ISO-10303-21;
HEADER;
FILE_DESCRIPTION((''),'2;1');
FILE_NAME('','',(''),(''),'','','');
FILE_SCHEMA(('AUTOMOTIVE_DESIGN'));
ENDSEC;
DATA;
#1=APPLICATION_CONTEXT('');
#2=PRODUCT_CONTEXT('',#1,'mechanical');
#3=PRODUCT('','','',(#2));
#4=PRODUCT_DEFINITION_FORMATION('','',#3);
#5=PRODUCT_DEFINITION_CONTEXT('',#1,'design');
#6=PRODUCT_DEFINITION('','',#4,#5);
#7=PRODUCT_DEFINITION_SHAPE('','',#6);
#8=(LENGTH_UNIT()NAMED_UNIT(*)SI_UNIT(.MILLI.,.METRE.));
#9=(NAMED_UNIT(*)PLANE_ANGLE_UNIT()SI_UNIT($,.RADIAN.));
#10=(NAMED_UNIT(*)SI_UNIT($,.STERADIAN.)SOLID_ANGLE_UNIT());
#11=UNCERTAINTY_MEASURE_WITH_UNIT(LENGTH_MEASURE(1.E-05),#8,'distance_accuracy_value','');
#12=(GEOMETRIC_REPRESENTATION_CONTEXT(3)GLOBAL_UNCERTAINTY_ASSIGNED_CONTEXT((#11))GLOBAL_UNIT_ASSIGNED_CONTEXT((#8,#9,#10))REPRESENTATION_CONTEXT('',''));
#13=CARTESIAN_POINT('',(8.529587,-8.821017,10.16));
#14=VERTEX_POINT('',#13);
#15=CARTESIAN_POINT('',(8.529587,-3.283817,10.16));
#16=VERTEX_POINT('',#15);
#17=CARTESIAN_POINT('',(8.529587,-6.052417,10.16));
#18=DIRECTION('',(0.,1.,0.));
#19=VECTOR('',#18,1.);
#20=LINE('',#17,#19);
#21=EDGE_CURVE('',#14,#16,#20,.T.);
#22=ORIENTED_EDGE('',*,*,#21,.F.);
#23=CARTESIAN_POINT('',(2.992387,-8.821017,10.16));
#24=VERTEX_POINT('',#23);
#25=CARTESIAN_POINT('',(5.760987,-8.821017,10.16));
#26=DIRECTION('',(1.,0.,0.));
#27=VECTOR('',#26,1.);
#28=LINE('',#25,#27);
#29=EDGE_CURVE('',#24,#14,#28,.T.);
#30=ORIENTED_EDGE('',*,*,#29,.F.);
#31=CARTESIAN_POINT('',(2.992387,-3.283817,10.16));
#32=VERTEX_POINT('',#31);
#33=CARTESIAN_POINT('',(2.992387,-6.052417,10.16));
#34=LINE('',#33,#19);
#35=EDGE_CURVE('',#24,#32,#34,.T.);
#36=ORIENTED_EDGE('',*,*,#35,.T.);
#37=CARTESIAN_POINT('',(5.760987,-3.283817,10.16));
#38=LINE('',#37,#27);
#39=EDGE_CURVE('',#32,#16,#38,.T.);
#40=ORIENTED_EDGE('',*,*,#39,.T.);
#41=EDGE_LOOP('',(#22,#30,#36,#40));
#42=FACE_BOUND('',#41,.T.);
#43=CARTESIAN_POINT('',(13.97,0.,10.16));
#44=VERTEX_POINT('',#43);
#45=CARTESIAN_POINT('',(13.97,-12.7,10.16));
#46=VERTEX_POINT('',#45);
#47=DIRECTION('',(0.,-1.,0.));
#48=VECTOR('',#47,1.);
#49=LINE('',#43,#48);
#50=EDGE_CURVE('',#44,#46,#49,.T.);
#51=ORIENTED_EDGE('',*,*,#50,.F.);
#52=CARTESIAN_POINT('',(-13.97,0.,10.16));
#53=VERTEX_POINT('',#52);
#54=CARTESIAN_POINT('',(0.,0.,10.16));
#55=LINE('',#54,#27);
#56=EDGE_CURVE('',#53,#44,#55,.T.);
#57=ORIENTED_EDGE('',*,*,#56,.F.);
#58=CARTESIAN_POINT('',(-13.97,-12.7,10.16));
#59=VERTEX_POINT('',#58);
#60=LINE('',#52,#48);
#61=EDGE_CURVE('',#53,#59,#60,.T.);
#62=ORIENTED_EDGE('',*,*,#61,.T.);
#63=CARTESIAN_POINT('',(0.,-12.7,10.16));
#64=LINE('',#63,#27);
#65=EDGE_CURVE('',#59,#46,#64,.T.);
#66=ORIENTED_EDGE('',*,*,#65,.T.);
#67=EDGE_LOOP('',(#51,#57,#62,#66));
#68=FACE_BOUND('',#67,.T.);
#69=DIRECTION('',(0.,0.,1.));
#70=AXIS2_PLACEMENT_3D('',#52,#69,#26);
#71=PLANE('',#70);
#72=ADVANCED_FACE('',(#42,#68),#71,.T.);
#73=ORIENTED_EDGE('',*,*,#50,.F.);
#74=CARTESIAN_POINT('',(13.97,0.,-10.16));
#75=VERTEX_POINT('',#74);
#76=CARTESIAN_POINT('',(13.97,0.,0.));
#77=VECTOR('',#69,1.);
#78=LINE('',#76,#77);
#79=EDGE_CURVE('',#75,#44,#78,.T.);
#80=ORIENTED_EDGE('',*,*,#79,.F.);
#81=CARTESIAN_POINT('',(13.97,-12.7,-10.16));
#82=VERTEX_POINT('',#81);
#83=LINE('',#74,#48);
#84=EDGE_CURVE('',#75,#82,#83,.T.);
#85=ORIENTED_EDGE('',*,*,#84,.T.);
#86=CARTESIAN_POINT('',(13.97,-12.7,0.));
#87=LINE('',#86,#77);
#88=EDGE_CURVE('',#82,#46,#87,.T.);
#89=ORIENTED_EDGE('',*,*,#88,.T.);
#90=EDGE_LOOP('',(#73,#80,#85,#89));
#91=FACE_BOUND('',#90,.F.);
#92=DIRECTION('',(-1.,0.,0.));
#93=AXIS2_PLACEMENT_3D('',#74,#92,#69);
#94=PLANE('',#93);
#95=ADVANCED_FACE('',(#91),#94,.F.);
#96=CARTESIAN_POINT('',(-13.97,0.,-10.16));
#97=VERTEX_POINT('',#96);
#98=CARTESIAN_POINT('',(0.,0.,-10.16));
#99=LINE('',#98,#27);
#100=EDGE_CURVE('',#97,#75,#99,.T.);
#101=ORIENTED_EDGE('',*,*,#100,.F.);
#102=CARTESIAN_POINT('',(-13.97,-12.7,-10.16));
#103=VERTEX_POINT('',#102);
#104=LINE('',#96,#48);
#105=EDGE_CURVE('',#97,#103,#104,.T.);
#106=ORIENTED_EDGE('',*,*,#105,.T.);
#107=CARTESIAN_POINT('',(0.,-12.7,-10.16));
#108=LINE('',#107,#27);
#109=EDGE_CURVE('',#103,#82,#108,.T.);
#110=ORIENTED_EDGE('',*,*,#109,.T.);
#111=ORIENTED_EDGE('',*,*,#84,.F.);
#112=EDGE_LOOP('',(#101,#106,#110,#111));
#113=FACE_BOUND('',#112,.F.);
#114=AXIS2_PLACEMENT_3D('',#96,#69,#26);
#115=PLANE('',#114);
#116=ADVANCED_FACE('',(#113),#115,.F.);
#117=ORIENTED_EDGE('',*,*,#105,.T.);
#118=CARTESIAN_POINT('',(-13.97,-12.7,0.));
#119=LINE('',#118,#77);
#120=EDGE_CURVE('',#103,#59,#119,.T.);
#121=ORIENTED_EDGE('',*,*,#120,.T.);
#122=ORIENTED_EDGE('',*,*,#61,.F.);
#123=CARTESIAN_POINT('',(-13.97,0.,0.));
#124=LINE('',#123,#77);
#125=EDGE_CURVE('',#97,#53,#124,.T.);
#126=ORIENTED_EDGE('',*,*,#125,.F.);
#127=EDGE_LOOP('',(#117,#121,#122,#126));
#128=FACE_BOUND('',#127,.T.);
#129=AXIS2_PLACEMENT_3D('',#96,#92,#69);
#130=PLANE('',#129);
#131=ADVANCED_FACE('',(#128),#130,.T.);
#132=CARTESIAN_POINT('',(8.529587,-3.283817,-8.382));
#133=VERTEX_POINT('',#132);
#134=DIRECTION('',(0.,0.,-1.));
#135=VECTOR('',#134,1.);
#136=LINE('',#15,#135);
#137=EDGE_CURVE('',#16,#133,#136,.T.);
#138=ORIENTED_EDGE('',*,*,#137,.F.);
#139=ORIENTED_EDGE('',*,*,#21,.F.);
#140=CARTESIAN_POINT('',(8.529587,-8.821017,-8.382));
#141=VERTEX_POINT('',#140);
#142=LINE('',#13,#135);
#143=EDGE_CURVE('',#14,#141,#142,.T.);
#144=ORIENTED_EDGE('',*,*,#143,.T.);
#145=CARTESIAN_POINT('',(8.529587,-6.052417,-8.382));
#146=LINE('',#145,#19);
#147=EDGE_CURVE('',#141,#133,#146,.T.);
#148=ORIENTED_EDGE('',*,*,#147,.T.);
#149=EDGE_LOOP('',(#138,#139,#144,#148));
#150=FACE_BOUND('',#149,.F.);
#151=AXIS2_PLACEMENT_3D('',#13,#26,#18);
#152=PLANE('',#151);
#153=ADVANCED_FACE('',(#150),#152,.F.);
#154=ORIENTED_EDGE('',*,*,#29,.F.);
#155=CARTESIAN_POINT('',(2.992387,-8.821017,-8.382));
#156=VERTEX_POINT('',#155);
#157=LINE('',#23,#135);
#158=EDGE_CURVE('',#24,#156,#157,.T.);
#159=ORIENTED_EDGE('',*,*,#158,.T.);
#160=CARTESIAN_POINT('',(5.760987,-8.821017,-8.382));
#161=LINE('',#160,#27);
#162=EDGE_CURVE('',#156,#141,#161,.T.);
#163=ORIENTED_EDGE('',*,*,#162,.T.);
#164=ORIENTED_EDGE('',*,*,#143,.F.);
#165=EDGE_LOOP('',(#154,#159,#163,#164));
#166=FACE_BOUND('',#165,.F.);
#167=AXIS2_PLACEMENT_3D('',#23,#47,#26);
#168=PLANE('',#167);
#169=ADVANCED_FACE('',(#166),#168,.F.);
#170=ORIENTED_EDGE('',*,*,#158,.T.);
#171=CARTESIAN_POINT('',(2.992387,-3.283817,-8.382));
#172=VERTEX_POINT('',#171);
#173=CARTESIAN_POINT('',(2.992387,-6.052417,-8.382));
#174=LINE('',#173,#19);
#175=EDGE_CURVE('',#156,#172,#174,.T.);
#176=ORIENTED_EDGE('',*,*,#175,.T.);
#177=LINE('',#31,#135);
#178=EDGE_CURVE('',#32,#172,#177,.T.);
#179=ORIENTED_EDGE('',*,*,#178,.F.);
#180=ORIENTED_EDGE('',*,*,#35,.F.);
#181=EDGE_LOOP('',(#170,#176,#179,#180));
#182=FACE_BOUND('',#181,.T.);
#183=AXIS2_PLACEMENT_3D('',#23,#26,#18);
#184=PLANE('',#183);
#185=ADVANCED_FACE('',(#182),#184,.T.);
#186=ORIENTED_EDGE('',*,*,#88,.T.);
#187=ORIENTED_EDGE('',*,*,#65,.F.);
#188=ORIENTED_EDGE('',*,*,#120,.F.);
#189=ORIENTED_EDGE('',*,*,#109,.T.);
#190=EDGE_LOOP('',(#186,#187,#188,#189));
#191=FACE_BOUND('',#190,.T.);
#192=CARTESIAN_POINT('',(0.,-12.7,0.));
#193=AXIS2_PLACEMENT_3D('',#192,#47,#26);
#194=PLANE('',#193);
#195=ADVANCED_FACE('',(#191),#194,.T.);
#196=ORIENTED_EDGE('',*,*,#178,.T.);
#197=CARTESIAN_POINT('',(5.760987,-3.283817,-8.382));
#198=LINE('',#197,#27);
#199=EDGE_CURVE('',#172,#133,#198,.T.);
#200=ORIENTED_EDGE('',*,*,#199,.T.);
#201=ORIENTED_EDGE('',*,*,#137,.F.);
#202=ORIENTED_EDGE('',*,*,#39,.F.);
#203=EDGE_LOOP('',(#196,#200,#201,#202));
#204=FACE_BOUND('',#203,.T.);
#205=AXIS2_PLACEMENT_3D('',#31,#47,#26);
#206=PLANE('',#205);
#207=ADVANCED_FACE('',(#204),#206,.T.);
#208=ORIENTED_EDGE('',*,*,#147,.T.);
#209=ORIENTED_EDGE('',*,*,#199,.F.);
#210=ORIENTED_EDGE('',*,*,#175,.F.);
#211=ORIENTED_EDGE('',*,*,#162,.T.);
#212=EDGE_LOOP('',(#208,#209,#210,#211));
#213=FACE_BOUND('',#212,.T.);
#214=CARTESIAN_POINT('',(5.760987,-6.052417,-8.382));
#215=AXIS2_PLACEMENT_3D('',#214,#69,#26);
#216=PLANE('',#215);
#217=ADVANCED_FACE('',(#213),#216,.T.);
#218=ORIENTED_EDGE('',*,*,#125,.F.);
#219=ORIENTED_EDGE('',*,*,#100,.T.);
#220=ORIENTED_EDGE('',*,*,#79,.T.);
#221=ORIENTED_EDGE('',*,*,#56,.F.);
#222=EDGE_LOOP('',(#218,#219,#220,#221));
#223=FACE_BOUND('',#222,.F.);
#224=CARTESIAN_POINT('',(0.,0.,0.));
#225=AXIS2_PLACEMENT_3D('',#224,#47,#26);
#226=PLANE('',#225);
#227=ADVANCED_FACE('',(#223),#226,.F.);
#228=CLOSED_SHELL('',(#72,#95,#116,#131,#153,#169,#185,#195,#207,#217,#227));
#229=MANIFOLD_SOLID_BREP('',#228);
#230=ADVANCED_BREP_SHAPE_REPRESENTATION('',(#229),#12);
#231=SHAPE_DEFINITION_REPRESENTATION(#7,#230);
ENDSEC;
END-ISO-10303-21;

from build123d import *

# Parameters (mm, degrees)
F0_W     = 27.94
F0_H     = 20.32
F1_DEPTH = 12.7
F2_W     = 5.5372
F2_H     = 5.5372
F3_DEPTH = 18.542


# Not quite as in the source:
# - a feature names something its author has since deleted; it is built from what else it names


with BuildPart() as f1:
    # F0 (on Front) → F1 (new body)
    with BuildSketch(Plane.XZ):
        Rectangle(F0_W, F0_H)
    extrude(amount=F1_DEPTH)

    # F2 (on face) → F3 (cut)
    with BuildSketch(Plane.XY.offset(10.16)):
        with Locations((5.760986782, -6.0524168657)):
            Rectangle(F2_W, F2_H)
    extrude(amount=-F3_DEPTH, mode=Mode.SUBTRACT)


solid = f1.part
